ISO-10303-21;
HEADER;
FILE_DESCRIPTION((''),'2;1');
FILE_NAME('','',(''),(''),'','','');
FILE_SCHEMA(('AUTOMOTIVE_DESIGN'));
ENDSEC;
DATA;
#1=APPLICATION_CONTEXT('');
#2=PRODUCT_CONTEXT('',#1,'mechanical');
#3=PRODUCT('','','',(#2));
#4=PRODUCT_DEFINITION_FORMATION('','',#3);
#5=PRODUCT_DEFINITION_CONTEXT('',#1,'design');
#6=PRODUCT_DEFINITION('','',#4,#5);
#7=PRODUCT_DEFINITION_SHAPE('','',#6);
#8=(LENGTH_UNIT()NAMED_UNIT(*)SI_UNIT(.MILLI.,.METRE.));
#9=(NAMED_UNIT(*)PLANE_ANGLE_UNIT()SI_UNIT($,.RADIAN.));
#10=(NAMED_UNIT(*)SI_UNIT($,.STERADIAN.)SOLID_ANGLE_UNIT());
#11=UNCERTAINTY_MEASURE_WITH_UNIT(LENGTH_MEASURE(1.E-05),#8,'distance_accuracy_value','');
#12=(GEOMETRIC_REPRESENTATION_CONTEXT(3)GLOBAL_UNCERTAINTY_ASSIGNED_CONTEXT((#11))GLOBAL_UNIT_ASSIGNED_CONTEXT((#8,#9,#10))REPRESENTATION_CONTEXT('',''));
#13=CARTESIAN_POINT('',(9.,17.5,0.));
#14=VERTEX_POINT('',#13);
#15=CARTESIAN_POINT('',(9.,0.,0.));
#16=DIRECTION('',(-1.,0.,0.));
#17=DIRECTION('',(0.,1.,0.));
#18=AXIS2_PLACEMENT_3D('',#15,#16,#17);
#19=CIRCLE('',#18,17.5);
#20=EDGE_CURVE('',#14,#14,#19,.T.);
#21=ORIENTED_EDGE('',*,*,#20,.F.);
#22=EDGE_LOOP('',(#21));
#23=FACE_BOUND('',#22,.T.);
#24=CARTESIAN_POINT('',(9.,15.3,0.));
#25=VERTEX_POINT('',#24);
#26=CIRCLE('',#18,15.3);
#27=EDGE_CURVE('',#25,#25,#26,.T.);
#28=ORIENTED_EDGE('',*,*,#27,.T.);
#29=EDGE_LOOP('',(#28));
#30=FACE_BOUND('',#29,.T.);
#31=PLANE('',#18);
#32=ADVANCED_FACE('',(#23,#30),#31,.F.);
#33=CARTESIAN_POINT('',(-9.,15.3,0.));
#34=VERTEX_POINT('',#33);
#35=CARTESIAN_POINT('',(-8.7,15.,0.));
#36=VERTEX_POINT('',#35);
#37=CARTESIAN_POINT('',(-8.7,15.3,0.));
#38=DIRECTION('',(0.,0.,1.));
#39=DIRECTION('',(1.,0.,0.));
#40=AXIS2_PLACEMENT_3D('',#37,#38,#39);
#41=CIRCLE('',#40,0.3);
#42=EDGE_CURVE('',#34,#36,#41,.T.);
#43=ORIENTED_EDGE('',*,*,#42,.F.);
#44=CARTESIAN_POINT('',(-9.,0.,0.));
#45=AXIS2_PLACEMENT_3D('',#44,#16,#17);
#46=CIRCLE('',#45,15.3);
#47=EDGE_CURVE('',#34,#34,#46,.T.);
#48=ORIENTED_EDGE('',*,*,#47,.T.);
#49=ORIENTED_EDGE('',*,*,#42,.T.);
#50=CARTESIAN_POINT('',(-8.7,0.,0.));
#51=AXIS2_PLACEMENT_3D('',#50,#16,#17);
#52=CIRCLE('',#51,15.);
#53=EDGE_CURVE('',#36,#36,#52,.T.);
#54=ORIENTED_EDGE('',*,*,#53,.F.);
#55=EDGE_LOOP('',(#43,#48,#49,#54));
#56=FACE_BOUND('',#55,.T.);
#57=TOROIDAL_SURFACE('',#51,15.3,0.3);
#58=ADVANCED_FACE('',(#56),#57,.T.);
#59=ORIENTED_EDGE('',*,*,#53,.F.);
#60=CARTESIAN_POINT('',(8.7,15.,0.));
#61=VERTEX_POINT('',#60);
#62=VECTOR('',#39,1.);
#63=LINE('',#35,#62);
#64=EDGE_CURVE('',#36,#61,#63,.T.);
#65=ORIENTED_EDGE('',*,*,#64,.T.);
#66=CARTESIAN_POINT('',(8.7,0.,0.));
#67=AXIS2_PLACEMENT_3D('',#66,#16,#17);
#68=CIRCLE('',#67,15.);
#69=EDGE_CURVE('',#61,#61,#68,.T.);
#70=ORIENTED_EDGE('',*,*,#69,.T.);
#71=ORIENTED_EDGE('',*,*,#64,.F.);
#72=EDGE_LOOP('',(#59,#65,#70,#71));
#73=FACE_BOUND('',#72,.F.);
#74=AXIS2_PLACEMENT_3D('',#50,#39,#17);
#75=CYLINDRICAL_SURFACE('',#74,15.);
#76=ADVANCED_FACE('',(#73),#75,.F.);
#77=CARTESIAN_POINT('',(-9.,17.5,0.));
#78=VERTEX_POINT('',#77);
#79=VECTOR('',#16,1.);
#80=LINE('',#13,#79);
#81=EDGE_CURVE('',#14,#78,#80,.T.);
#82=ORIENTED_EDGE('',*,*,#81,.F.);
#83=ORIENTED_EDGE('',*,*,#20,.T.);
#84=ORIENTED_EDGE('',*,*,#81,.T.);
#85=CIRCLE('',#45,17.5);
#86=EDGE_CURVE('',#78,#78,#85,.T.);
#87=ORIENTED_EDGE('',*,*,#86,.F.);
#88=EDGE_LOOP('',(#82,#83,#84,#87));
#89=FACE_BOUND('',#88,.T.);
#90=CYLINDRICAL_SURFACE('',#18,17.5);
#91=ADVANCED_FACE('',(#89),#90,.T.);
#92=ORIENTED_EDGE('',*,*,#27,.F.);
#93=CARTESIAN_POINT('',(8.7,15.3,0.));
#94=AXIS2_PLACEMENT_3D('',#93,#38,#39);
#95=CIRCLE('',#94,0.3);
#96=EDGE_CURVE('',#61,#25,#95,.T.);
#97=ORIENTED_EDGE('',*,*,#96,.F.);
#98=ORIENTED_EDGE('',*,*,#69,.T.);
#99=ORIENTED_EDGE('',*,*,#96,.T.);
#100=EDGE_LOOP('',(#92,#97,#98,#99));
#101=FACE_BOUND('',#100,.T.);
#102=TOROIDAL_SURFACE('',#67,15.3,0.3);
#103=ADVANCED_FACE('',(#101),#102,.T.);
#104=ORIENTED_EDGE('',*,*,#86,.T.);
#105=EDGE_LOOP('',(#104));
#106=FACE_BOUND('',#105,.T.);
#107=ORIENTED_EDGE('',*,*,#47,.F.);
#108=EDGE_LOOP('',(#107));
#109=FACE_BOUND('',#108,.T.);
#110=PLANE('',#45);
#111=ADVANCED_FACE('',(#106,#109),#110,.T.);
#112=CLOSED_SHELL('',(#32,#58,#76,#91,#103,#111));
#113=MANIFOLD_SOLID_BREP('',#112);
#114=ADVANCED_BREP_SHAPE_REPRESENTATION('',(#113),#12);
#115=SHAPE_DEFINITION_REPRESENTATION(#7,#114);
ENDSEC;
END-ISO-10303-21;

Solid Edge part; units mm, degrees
sketch "Sketch1" plane through (0, 0, 0) normal (0, 0, 1) x (1, 0, 0)
  arc A0 (-9, 15.3) -> (-8.7, 15) centre (-8.7, 15.3) ccw
  line L0 (-8.7, 15) -> (8.7, 15)
  arc A1 (8.7, 15) -> (9, 15.3) centre (8.7, 15.3) ccw
  line L1 (9, 15.3) -> (9, 17.5)
  line L2 (9, 17.5) -> (-9, 17.5)
  line L3 (-9, 17.5) -> (-9, 15.3)
revolve "RevolvedProtrusion1" add sketch "Sketch1" angle 360 about axis through (9, 0, 0) along (-1, 0, 0)
properties part number "NA 4906UU Inner ring" material "Aluminio, 7075-T6"
